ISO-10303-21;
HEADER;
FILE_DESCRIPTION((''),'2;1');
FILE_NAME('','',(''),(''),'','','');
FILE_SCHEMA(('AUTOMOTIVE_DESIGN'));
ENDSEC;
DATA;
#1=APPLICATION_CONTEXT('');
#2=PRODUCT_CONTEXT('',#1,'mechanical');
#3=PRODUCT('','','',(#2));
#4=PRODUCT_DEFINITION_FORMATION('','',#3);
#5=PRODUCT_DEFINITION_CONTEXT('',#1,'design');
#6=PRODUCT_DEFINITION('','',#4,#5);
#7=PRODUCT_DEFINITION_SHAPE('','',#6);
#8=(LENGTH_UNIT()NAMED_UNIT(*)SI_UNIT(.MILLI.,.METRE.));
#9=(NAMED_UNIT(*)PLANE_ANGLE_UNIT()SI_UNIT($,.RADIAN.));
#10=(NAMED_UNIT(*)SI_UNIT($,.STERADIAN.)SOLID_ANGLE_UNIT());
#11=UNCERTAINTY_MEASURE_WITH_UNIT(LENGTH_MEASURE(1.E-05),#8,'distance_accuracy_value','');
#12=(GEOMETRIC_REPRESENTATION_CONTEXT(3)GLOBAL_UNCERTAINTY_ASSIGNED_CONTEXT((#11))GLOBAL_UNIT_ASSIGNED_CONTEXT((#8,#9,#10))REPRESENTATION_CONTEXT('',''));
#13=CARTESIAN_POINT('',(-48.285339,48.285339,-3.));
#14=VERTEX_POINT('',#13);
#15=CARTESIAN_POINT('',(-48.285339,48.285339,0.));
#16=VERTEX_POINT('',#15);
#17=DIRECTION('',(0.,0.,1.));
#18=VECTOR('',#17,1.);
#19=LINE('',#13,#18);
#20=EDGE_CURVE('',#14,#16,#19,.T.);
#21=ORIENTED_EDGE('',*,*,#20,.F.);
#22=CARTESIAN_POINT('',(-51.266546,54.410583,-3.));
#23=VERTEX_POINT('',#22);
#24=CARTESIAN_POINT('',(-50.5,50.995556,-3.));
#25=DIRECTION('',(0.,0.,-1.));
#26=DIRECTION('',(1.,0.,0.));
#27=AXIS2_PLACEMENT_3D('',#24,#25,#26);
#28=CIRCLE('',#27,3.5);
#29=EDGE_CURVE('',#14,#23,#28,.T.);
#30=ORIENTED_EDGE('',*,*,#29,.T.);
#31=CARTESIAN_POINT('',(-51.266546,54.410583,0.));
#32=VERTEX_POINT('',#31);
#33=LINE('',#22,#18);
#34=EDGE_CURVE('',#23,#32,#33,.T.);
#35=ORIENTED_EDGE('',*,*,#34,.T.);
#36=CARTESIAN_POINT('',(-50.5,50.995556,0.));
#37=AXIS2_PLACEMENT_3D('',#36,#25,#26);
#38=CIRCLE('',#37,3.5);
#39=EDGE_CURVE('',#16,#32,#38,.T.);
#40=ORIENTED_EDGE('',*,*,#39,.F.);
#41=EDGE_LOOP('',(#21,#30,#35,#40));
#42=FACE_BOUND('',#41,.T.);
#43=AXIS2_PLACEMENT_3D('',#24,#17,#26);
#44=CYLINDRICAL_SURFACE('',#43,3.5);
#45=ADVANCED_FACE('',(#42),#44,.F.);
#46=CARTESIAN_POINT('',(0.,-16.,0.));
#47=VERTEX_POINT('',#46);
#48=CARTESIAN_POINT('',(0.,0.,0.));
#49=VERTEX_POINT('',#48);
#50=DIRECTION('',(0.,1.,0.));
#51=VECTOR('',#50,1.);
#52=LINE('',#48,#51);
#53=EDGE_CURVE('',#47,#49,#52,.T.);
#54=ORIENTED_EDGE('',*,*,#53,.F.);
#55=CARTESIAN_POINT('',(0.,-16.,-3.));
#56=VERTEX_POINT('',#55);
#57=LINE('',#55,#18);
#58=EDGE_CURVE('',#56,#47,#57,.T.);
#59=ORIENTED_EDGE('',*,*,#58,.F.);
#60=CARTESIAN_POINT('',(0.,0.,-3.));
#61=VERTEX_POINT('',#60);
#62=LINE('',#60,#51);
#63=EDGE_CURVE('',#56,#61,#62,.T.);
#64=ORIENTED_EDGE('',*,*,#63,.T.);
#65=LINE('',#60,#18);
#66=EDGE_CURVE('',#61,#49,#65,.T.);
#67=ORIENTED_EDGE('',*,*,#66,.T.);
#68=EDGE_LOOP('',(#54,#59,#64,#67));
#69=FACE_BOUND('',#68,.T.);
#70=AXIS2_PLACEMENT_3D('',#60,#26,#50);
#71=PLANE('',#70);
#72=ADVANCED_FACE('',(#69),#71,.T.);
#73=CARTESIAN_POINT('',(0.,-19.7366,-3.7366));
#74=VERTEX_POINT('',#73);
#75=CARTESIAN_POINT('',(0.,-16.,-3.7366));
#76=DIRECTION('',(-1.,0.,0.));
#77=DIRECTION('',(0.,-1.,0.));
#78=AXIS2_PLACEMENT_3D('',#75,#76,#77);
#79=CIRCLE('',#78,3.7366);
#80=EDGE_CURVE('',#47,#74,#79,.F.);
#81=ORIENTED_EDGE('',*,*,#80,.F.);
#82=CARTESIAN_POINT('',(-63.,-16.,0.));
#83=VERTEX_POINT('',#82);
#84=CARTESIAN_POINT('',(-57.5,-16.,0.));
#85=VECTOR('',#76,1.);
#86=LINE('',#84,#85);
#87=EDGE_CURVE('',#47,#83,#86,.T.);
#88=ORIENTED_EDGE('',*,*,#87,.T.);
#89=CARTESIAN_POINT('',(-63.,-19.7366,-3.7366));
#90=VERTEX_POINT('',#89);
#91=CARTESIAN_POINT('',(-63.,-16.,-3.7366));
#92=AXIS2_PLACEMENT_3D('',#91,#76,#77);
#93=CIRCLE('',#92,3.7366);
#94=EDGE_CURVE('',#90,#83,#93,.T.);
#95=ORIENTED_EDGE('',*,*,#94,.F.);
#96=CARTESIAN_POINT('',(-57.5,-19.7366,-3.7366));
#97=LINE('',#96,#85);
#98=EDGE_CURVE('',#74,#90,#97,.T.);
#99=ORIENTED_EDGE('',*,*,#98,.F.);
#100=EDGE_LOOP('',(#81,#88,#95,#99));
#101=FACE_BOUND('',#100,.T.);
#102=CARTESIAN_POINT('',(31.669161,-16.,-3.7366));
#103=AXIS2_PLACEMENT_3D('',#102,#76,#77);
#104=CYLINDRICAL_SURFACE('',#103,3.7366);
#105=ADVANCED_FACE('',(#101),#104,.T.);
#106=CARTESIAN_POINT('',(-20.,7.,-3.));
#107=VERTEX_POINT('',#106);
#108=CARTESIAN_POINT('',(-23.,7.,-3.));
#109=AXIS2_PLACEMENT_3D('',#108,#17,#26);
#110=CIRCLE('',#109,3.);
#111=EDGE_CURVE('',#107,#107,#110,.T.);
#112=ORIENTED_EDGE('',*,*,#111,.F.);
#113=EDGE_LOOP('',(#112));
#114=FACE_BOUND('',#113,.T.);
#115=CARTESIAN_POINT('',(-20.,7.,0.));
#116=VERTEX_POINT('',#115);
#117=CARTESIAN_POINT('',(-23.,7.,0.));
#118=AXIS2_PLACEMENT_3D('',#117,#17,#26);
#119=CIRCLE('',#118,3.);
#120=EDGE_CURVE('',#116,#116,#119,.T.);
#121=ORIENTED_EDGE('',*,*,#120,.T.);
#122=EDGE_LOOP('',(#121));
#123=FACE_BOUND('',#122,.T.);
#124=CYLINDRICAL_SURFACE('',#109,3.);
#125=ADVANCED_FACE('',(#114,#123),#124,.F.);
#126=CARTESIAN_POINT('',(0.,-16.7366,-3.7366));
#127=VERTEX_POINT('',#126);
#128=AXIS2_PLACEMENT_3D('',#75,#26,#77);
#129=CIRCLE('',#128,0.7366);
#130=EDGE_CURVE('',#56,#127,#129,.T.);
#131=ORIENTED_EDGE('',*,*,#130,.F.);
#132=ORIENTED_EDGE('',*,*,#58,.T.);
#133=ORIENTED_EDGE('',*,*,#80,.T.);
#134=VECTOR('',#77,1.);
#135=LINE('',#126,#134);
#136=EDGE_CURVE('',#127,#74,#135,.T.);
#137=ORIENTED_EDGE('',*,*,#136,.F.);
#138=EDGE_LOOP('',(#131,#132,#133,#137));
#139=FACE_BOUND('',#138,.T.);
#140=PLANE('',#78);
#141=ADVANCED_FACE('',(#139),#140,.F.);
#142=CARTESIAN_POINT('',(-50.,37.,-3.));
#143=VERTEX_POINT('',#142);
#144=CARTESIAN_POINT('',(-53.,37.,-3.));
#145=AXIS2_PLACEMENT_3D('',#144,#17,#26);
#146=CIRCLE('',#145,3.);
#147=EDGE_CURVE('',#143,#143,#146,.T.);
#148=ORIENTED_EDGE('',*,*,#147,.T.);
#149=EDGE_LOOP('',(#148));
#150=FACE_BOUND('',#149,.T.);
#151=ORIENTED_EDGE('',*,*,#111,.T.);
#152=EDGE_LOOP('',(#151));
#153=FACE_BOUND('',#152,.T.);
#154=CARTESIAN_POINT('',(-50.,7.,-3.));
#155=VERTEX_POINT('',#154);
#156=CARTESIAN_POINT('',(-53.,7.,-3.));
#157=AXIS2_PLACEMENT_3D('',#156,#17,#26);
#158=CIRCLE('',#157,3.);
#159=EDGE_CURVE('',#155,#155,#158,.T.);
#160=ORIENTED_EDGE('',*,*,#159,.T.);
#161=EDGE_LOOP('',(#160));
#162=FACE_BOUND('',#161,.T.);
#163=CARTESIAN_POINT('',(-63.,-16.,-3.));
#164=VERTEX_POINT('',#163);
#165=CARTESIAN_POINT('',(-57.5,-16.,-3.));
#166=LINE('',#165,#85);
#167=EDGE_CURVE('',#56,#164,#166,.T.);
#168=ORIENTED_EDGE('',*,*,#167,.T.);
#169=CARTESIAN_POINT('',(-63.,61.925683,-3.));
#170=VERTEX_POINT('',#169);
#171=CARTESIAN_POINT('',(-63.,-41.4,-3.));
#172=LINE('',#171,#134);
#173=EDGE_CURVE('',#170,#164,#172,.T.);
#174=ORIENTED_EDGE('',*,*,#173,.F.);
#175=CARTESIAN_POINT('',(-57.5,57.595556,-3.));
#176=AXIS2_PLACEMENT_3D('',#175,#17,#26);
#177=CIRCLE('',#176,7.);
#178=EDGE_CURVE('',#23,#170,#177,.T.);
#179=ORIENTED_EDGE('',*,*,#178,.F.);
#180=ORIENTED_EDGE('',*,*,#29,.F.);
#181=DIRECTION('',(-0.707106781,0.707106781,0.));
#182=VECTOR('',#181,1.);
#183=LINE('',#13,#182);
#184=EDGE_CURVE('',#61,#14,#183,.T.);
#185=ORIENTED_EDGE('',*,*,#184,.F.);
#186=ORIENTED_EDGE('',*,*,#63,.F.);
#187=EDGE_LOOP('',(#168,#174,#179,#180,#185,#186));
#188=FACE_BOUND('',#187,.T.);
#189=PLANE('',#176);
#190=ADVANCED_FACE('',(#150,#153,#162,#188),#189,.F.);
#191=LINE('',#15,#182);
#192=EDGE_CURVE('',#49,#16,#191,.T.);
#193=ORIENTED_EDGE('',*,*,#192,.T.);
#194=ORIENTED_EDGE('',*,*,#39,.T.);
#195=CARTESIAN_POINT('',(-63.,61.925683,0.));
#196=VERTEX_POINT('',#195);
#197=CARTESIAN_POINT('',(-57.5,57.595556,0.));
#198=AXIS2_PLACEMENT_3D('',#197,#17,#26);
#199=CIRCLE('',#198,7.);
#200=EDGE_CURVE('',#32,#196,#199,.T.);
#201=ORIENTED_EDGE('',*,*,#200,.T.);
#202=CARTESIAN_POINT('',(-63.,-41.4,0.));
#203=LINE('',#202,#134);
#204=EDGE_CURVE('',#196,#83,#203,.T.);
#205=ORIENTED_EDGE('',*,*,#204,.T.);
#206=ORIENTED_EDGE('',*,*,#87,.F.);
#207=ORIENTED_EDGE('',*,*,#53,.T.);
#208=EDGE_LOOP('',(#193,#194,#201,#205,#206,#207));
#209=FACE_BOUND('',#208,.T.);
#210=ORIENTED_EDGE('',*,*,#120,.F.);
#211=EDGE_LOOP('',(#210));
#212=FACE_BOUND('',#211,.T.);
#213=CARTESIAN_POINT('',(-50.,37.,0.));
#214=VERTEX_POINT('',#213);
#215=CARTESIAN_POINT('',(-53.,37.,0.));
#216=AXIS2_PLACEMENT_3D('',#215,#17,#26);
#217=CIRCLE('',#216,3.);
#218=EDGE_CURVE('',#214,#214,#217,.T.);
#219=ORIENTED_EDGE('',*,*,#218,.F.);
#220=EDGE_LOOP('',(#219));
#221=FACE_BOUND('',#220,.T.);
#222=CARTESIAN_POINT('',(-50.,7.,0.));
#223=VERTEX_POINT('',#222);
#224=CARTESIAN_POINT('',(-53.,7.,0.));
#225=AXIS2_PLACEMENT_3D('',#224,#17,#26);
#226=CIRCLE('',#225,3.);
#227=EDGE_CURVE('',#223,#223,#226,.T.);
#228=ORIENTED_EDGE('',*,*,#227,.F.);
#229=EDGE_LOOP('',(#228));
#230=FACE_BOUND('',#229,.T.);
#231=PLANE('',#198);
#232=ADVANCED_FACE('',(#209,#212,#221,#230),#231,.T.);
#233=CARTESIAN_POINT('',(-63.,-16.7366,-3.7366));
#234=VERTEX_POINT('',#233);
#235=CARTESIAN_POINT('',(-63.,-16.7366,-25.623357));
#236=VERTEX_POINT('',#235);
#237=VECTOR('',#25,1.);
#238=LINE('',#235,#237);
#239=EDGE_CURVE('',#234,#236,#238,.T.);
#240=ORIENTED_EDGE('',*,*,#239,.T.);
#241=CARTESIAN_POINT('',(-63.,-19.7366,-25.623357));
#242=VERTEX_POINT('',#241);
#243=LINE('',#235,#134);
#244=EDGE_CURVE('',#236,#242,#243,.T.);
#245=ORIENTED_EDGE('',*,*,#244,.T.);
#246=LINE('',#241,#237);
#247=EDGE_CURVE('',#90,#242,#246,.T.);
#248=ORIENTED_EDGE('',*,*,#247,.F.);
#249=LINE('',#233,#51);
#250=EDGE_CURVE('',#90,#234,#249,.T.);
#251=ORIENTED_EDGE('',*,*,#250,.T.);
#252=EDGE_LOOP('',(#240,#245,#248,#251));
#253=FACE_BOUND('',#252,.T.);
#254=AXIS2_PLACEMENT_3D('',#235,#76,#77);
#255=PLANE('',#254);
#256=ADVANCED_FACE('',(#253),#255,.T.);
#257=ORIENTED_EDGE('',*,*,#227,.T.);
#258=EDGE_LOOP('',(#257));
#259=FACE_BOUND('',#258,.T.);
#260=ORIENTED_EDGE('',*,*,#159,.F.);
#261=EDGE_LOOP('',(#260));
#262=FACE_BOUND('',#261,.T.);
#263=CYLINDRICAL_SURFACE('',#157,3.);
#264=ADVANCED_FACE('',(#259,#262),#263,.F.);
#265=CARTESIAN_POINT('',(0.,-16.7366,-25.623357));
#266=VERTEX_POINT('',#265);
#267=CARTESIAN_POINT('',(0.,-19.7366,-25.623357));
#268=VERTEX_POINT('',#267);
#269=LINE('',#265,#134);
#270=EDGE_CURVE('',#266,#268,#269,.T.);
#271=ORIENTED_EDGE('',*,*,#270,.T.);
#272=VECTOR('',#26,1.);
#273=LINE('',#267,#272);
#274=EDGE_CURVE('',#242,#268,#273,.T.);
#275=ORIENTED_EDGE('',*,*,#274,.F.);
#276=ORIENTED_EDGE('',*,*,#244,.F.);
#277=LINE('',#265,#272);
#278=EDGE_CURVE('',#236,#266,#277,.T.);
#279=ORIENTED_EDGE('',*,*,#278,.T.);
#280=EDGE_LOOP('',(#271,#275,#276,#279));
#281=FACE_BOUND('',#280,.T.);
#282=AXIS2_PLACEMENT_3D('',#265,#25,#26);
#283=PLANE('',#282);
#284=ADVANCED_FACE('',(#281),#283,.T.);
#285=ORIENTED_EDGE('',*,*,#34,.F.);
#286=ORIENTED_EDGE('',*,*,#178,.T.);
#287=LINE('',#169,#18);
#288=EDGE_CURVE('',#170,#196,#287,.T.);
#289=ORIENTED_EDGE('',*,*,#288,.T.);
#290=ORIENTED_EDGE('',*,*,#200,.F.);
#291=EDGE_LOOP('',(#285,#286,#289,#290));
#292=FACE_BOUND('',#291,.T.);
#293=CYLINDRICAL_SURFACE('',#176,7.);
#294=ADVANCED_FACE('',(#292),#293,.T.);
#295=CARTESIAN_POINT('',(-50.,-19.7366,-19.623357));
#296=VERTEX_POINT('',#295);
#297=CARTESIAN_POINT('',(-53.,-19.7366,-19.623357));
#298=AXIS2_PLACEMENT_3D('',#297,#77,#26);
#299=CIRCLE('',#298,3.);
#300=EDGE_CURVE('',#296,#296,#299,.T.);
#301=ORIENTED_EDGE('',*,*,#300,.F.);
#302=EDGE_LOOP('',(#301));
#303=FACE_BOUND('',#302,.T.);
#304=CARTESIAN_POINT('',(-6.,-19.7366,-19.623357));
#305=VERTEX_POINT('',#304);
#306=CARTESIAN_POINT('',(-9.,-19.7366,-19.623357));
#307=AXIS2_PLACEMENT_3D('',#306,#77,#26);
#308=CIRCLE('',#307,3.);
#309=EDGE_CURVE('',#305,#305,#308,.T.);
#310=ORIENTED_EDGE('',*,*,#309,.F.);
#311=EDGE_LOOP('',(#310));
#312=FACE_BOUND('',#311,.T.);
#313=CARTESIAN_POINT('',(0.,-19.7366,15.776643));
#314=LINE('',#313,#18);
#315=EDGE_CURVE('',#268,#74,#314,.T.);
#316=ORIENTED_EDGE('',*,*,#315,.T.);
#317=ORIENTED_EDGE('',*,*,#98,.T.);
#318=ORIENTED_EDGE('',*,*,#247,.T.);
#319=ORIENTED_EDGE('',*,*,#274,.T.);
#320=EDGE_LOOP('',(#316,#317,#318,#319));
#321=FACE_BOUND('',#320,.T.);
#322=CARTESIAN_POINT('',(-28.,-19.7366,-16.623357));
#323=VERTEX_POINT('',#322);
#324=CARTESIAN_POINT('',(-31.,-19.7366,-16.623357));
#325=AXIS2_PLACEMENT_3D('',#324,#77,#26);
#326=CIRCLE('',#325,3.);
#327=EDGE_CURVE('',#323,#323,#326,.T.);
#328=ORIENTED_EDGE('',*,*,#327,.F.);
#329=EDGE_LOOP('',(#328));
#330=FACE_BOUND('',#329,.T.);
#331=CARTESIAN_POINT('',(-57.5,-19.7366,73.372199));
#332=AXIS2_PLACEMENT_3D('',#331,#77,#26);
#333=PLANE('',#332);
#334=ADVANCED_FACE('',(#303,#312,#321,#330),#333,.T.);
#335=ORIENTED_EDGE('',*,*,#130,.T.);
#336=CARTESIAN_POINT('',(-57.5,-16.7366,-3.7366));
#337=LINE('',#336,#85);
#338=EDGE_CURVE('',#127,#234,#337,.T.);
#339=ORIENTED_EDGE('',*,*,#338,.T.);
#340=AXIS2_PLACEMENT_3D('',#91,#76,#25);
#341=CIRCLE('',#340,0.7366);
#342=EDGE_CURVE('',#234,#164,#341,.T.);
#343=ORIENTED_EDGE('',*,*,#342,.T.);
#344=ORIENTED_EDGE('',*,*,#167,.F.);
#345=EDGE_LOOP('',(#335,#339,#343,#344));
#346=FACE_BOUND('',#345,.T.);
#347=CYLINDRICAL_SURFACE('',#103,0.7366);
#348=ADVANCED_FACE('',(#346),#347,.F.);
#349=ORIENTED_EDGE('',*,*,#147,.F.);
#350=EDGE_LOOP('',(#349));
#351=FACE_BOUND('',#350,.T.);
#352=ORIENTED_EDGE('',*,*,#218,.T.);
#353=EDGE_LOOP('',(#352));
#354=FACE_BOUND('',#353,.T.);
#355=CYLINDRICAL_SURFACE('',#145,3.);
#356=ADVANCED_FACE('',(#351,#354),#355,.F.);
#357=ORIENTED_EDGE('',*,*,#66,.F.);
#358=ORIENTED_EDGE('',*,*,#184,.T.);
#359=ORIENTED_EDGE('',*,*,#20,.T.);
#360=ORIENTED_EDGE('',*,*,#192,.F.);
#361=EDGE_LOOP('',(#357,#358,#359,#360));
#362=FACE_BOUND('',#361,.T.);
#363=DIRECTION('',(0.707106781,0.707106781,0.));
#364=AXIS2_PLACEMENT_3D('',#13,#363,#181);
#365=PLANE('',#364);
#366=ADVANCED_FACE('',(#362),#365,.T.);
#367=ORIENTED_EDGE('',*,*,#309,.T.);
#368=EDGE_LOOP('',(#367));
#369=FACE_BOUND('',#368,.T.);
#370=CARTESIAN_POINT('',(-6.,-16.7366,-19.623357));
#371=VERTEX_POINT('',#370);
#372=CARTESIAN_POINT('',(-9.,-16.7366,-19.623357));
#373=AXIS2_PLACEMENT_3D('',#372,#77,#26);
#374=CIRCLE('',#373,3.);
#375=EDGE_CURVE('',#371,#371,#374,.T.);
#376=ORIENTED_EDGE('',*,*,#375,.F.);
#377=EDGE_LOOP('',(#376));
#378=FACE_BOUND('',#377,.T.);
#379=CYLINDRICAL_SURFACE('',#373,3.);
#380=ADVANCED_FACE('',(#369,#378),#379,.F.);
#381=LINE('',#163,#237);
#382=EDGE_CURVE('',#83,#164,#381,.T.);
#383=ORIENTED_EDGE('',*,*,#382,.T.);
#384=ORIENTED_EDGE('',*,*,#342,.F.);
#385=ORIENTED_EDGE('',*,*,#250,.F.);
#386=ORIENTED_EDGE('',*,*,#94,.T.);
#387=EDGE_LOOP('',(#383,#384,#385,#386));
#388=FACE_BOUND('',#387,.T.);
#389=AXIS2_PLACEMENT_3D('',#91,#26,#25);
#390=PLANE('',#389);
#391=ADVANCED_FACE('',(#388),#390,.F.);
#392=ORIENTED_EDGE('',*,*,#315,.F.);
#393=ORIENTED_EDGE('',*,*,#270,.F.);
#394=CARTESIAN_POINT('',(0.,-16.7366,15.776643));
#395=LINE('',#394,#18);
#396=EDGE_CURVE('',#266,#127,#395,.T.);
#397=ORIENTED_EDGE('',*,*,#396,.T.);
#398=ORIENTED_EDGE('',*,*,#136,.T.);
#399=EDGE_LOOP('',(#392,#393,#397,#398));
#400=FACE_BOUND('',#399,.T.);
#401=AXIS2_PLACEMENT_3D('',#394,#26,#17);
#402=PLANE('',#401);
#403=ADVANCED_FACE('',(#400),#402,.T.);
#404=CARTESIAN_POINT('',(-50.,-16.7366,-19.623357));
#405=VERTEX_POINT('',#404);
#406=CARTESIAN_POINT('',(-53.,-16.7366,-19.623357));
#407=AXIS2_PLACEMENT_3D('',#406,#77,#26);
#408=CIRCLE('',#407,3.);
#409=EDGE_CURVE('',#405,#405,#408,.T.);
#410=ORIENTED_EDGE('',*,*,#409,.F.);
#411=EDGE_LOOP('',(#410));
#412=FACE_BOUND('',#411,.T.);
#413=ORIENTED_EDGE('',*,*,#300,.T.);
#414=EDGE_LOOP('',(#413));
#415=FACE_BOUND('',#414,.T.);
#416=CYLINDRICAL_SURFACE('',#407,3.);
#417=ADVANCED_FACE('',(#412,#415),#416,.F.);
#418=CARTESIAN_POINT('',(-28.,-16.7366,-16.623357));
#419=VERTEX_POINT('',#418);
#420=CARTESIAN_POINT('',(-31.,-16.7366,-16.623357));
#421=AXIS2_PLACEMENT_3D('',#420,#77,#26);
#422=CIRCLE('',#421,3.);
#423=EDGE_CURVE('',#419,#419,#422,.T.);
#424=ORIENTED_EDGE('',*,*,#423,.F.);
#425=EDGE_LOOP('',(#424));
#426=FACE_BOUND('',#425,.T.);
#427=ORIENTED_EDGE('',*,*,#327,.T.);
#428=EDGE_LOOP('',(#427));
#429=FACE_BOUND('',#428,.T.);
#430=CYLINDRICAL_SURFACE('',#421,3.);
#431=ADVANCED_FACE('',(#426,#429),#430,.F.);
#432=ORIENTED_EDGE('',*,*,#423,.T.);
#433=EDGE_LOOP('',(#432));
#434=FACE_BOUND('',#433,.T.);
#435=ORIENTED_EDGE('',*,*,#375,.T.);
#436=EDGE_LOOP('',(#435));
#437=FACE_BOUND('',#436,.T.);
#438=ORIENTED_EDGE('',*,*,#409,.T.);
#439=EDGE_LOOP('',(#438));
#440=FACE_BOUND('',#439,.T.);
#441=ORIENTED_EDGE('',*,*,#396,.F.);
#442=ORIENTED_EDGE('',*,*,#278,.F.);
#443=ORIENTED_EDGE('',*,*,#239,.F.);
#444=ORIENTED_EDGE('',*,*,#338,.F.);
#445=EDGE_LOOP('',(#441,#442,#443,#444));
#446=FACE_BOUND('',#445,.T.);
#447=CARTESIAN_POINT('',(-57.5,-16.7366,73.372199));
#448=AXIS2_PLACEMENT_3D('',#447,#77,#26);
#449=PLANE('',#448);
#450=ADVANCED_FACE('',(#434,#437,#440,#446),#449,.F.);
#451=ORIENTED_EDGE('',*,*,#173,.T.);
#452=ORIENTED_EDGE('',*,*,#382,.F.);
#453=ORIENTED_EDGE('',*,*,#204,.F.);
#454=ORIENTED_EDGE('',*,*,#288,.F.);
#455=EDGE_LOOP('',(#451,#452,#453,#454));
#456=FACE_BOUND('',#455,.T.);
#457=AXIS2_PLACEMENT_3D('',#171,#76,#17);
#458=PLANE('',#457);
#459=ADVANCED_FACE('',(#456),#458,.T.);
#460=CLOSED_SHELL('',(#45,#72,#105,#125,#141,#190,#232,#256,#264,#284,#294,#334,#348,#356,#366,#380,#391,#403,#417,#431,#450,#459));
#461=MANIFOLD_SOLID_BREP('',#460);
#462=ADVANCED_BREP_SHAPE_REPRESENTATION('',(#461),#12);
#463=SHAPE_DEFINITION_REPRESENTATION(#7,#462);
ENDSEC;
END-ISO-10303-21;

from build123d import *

# Parameters (mm, degrees)
SCHIZZO2_R                           = 3
BASE_FLANGIA1_DEPTH                  = 3
PIEGATURA_START                      = -41.4
PIEGATURA_DELLO_SCHIZZO1_OUTLINE_W   = 63
PIEGATURA_DELLO_SCHIZZO1_OUTLINE_H   = 3
PIEGATURA_DELLO_SCHIZZO1_DEPTH       = 21.6634
PIEGATURA_START_2                    = -19.383939692
PIEGATURA_DELLO_SCHIZZO1_2_OUTLINE_W = 63
PIEGATURA_DELLO_SCHIZZO1_2_OUTLINE_H = 22.623356935
PIEGATURA_DELLO_SCHIZZO1_2_OUTLINE_R = 3
PIEGATURA_DELLO_SCHIZZO1_2_DEPTH     = 2.647339692
PIEGATURA_START_3                    = -19.7366
PIEGATURA_DELLO_SCHIZZO1_3_OUTLINE_W = 63
PIEGATURA_DELLO_SCHIZZO1_3_OUTLINE_H = 22.623356935
PIEGATURA_DELLO_SCHIZZO1_3_OUTLINE_R = 3
PIEGATURA_DELLO_SCHIZZO1_3_DEPTH     = 3.7366
PIEGATURA_START_4                    = -64
PIEGATURA_DELLO_SCHIZZO1_4_DEPTH     = 64


with BuildPart() as part:
    # Base-Flangia1: sheet metal written as solids
    # Schizzo2 → Base-Flangia1 (new body)
    with BuildSketch(Plane.XY):
        with BuildLine():
            Line((0, 0), (0, -41.4))
            Line((0, -41.4), (-63, -41.4))
            Line((-63, -41.4), (-63, 61.925683224))
            ThreePointArc((-63, 61.925683224), (-53.724596428, 63.490157792), (-51.266546346, 54.410582808))
            ThreePointArc((-51.266546346, 54.410582808), (-53.647048092, 49.463861618), (-48.285339065, 48.285339065))
            Line((-48.285339065, 48.285339065), (0, 0))
        make_face()
        with Locations((-53, 37)):
            Circle(SCHIZZO2_R, mode=Mode.SUBTRACT)
        with Locations((-53, 7)):
            Circle(SCHIZZO2_R, mode=Mode.SUBTRACT)
        with Locations((-23, 7)):
            Circle(SCHIZZO2_R, mode=Mode.SUBTRACT)
        with Locations((-53, -35.4)):
            Circle(SCHIZZO2_R, mode=Mode.SUBTRACT)
        with Locations((-31, -32.4)):
            Circle(SCHIZZO2_R, mode=Mode.SUBTRACT)
        with Locations((-9, -35.4)):
            Circle(SCHIZZO2_R, mode=Mode.SUBTRACT)
    extrude(amount=-BASE_FLANGIA1_DEPTH)

    # Piegatura dello schizzo1: read off the stored shape, not the designer's step
    # Piegatura dello schizzo1 outline → Piegatura dello schizzo1 (cut)
    with BuildSketch(Plane(origin=(0, 0, 0), x_dir=(1, 0, 0), z_dir=(0, 1, 0)).offset(PIEGATURA_START)):
        with Locations((-31.5, 1.5)):
            Rectangle(PIEGATURA_DELLO_SCHIZZO1_OUTLINE_W, PIEGATURA_DELLO_SCHIZZO1_OUTLINE_H)
    extrude(amount=PIEGATURA_DELLO_SCHIZZO1_DEPTH, mode=Mode.SUBTRACT)

    # Piegatura dello schizzo1 2 outline → Piegatura dello schizzo1 2 (add)
    with BuildSketch(Plane(origin=(0, 0, 0), x_dir=(1, 0, 0), z_dir=(0, 1, 0)).offset(PIEGATURA_START_2)):
        with Locations((-31.5, 14.311678468)):
            Rectangle(PIEGATURA_DELLO_SCHIZZO1_2_OUTLINE_W, PIEGATURA_DELLO_SCHIZZO1_2_OUTLINE_H)
        with Locations((-53, 19.623356935)):
            Circle(PIEGATURA_DELLO_SCHIZZO1_2_OUTLINE_R, mode=Mode.SUBTRACT)
        with Locations((-31, 16.623356935)):
            Circle(PIEGATURA_DELLO_SCHIZZO1_2_OUTLINE_R, mode=Mode.SUBTRACT)
        with Locations((-9, 19.623356935)):
            Circle(PIEGATURA_DELLO_SCHIZZO1_2_OUTLINE_R, mode=Mode.SUBTRACT)
    extrude(amount=PIEGATURA_DELLO_SCHIZZO1_2_DEPTH)

    # Piegatura dello schizzo1 3 outline → Piegatura dello schizzo1 3 (add)
    with BuildSketch(Plane(origin=(0, 0, 0), x_dir=(1, 0, 0), z_dir=(0, 1, 0)).offset(PIEGATURA_START_3)):
        with Locations((-31.5, 14.311678468)):
            Rectangle(PIEGATURA_DELLO_SCHIZZO1_3_OUTLINE_W, PIEGATURA_DELLO_SCHIZZO1_3_OUTLINE_H)
        with Locations((-53, 19.623356935)):
            Circle(PIEGATURA_DELLO_SCHIZZO1_3_OUTLINE_R, mode=Mode.SUBTRACT)
        with Locations((-31, 16.623356935)):
            Circle(PIEGATURA_DELLO_SCHIZZO1_3_OUTLINE_R, mode=Mode.SUBTRACT)
        with Locations((-9, 19.623356935)):
            Circle(PIEGATURA_DELLO_SCHIZZO1_3_OUTLINE_R, mode=Mode.SUBTRACT)
    extrude(amount=PIEGATURA_DELLO_SCHIZZO1_3_DEPTH)

    # Piegatura dello schizzo1 4 outline → Piegatura dello schizzo1 4 (cut)
    with BuildSketch(Plane.YZ.offset(PIEGATURA_START_4)):
        with BuildLine():
            ThreePointArc((-16, -3), (-16.520854855, -3.215745145), (-16.7366, -3.7366))
            Line((-16.7366, -3.7366), (-16.7366, -25.623356935))
            Line((-16.7366, -25.623356935), (-16, -25.623356935))
            Line((-16, -25.623356935), (-16, -3))
        make_face()
        with BuildLine():
            Line((-19.7366, 0), (-19.7366, -3.7366))
            ThreePointArc((-19.7366, -3.7366), (-18.642175199, -1.094424801), (-16, 0))
            Line((-16, 0), (-19.7366, 0))
        make_face()
    extrude(amount=PIEGATURA_DELLO_SCHIZZO1_4_DEPTH, mode=Mode.SUBTRACT)


solid = part.part
